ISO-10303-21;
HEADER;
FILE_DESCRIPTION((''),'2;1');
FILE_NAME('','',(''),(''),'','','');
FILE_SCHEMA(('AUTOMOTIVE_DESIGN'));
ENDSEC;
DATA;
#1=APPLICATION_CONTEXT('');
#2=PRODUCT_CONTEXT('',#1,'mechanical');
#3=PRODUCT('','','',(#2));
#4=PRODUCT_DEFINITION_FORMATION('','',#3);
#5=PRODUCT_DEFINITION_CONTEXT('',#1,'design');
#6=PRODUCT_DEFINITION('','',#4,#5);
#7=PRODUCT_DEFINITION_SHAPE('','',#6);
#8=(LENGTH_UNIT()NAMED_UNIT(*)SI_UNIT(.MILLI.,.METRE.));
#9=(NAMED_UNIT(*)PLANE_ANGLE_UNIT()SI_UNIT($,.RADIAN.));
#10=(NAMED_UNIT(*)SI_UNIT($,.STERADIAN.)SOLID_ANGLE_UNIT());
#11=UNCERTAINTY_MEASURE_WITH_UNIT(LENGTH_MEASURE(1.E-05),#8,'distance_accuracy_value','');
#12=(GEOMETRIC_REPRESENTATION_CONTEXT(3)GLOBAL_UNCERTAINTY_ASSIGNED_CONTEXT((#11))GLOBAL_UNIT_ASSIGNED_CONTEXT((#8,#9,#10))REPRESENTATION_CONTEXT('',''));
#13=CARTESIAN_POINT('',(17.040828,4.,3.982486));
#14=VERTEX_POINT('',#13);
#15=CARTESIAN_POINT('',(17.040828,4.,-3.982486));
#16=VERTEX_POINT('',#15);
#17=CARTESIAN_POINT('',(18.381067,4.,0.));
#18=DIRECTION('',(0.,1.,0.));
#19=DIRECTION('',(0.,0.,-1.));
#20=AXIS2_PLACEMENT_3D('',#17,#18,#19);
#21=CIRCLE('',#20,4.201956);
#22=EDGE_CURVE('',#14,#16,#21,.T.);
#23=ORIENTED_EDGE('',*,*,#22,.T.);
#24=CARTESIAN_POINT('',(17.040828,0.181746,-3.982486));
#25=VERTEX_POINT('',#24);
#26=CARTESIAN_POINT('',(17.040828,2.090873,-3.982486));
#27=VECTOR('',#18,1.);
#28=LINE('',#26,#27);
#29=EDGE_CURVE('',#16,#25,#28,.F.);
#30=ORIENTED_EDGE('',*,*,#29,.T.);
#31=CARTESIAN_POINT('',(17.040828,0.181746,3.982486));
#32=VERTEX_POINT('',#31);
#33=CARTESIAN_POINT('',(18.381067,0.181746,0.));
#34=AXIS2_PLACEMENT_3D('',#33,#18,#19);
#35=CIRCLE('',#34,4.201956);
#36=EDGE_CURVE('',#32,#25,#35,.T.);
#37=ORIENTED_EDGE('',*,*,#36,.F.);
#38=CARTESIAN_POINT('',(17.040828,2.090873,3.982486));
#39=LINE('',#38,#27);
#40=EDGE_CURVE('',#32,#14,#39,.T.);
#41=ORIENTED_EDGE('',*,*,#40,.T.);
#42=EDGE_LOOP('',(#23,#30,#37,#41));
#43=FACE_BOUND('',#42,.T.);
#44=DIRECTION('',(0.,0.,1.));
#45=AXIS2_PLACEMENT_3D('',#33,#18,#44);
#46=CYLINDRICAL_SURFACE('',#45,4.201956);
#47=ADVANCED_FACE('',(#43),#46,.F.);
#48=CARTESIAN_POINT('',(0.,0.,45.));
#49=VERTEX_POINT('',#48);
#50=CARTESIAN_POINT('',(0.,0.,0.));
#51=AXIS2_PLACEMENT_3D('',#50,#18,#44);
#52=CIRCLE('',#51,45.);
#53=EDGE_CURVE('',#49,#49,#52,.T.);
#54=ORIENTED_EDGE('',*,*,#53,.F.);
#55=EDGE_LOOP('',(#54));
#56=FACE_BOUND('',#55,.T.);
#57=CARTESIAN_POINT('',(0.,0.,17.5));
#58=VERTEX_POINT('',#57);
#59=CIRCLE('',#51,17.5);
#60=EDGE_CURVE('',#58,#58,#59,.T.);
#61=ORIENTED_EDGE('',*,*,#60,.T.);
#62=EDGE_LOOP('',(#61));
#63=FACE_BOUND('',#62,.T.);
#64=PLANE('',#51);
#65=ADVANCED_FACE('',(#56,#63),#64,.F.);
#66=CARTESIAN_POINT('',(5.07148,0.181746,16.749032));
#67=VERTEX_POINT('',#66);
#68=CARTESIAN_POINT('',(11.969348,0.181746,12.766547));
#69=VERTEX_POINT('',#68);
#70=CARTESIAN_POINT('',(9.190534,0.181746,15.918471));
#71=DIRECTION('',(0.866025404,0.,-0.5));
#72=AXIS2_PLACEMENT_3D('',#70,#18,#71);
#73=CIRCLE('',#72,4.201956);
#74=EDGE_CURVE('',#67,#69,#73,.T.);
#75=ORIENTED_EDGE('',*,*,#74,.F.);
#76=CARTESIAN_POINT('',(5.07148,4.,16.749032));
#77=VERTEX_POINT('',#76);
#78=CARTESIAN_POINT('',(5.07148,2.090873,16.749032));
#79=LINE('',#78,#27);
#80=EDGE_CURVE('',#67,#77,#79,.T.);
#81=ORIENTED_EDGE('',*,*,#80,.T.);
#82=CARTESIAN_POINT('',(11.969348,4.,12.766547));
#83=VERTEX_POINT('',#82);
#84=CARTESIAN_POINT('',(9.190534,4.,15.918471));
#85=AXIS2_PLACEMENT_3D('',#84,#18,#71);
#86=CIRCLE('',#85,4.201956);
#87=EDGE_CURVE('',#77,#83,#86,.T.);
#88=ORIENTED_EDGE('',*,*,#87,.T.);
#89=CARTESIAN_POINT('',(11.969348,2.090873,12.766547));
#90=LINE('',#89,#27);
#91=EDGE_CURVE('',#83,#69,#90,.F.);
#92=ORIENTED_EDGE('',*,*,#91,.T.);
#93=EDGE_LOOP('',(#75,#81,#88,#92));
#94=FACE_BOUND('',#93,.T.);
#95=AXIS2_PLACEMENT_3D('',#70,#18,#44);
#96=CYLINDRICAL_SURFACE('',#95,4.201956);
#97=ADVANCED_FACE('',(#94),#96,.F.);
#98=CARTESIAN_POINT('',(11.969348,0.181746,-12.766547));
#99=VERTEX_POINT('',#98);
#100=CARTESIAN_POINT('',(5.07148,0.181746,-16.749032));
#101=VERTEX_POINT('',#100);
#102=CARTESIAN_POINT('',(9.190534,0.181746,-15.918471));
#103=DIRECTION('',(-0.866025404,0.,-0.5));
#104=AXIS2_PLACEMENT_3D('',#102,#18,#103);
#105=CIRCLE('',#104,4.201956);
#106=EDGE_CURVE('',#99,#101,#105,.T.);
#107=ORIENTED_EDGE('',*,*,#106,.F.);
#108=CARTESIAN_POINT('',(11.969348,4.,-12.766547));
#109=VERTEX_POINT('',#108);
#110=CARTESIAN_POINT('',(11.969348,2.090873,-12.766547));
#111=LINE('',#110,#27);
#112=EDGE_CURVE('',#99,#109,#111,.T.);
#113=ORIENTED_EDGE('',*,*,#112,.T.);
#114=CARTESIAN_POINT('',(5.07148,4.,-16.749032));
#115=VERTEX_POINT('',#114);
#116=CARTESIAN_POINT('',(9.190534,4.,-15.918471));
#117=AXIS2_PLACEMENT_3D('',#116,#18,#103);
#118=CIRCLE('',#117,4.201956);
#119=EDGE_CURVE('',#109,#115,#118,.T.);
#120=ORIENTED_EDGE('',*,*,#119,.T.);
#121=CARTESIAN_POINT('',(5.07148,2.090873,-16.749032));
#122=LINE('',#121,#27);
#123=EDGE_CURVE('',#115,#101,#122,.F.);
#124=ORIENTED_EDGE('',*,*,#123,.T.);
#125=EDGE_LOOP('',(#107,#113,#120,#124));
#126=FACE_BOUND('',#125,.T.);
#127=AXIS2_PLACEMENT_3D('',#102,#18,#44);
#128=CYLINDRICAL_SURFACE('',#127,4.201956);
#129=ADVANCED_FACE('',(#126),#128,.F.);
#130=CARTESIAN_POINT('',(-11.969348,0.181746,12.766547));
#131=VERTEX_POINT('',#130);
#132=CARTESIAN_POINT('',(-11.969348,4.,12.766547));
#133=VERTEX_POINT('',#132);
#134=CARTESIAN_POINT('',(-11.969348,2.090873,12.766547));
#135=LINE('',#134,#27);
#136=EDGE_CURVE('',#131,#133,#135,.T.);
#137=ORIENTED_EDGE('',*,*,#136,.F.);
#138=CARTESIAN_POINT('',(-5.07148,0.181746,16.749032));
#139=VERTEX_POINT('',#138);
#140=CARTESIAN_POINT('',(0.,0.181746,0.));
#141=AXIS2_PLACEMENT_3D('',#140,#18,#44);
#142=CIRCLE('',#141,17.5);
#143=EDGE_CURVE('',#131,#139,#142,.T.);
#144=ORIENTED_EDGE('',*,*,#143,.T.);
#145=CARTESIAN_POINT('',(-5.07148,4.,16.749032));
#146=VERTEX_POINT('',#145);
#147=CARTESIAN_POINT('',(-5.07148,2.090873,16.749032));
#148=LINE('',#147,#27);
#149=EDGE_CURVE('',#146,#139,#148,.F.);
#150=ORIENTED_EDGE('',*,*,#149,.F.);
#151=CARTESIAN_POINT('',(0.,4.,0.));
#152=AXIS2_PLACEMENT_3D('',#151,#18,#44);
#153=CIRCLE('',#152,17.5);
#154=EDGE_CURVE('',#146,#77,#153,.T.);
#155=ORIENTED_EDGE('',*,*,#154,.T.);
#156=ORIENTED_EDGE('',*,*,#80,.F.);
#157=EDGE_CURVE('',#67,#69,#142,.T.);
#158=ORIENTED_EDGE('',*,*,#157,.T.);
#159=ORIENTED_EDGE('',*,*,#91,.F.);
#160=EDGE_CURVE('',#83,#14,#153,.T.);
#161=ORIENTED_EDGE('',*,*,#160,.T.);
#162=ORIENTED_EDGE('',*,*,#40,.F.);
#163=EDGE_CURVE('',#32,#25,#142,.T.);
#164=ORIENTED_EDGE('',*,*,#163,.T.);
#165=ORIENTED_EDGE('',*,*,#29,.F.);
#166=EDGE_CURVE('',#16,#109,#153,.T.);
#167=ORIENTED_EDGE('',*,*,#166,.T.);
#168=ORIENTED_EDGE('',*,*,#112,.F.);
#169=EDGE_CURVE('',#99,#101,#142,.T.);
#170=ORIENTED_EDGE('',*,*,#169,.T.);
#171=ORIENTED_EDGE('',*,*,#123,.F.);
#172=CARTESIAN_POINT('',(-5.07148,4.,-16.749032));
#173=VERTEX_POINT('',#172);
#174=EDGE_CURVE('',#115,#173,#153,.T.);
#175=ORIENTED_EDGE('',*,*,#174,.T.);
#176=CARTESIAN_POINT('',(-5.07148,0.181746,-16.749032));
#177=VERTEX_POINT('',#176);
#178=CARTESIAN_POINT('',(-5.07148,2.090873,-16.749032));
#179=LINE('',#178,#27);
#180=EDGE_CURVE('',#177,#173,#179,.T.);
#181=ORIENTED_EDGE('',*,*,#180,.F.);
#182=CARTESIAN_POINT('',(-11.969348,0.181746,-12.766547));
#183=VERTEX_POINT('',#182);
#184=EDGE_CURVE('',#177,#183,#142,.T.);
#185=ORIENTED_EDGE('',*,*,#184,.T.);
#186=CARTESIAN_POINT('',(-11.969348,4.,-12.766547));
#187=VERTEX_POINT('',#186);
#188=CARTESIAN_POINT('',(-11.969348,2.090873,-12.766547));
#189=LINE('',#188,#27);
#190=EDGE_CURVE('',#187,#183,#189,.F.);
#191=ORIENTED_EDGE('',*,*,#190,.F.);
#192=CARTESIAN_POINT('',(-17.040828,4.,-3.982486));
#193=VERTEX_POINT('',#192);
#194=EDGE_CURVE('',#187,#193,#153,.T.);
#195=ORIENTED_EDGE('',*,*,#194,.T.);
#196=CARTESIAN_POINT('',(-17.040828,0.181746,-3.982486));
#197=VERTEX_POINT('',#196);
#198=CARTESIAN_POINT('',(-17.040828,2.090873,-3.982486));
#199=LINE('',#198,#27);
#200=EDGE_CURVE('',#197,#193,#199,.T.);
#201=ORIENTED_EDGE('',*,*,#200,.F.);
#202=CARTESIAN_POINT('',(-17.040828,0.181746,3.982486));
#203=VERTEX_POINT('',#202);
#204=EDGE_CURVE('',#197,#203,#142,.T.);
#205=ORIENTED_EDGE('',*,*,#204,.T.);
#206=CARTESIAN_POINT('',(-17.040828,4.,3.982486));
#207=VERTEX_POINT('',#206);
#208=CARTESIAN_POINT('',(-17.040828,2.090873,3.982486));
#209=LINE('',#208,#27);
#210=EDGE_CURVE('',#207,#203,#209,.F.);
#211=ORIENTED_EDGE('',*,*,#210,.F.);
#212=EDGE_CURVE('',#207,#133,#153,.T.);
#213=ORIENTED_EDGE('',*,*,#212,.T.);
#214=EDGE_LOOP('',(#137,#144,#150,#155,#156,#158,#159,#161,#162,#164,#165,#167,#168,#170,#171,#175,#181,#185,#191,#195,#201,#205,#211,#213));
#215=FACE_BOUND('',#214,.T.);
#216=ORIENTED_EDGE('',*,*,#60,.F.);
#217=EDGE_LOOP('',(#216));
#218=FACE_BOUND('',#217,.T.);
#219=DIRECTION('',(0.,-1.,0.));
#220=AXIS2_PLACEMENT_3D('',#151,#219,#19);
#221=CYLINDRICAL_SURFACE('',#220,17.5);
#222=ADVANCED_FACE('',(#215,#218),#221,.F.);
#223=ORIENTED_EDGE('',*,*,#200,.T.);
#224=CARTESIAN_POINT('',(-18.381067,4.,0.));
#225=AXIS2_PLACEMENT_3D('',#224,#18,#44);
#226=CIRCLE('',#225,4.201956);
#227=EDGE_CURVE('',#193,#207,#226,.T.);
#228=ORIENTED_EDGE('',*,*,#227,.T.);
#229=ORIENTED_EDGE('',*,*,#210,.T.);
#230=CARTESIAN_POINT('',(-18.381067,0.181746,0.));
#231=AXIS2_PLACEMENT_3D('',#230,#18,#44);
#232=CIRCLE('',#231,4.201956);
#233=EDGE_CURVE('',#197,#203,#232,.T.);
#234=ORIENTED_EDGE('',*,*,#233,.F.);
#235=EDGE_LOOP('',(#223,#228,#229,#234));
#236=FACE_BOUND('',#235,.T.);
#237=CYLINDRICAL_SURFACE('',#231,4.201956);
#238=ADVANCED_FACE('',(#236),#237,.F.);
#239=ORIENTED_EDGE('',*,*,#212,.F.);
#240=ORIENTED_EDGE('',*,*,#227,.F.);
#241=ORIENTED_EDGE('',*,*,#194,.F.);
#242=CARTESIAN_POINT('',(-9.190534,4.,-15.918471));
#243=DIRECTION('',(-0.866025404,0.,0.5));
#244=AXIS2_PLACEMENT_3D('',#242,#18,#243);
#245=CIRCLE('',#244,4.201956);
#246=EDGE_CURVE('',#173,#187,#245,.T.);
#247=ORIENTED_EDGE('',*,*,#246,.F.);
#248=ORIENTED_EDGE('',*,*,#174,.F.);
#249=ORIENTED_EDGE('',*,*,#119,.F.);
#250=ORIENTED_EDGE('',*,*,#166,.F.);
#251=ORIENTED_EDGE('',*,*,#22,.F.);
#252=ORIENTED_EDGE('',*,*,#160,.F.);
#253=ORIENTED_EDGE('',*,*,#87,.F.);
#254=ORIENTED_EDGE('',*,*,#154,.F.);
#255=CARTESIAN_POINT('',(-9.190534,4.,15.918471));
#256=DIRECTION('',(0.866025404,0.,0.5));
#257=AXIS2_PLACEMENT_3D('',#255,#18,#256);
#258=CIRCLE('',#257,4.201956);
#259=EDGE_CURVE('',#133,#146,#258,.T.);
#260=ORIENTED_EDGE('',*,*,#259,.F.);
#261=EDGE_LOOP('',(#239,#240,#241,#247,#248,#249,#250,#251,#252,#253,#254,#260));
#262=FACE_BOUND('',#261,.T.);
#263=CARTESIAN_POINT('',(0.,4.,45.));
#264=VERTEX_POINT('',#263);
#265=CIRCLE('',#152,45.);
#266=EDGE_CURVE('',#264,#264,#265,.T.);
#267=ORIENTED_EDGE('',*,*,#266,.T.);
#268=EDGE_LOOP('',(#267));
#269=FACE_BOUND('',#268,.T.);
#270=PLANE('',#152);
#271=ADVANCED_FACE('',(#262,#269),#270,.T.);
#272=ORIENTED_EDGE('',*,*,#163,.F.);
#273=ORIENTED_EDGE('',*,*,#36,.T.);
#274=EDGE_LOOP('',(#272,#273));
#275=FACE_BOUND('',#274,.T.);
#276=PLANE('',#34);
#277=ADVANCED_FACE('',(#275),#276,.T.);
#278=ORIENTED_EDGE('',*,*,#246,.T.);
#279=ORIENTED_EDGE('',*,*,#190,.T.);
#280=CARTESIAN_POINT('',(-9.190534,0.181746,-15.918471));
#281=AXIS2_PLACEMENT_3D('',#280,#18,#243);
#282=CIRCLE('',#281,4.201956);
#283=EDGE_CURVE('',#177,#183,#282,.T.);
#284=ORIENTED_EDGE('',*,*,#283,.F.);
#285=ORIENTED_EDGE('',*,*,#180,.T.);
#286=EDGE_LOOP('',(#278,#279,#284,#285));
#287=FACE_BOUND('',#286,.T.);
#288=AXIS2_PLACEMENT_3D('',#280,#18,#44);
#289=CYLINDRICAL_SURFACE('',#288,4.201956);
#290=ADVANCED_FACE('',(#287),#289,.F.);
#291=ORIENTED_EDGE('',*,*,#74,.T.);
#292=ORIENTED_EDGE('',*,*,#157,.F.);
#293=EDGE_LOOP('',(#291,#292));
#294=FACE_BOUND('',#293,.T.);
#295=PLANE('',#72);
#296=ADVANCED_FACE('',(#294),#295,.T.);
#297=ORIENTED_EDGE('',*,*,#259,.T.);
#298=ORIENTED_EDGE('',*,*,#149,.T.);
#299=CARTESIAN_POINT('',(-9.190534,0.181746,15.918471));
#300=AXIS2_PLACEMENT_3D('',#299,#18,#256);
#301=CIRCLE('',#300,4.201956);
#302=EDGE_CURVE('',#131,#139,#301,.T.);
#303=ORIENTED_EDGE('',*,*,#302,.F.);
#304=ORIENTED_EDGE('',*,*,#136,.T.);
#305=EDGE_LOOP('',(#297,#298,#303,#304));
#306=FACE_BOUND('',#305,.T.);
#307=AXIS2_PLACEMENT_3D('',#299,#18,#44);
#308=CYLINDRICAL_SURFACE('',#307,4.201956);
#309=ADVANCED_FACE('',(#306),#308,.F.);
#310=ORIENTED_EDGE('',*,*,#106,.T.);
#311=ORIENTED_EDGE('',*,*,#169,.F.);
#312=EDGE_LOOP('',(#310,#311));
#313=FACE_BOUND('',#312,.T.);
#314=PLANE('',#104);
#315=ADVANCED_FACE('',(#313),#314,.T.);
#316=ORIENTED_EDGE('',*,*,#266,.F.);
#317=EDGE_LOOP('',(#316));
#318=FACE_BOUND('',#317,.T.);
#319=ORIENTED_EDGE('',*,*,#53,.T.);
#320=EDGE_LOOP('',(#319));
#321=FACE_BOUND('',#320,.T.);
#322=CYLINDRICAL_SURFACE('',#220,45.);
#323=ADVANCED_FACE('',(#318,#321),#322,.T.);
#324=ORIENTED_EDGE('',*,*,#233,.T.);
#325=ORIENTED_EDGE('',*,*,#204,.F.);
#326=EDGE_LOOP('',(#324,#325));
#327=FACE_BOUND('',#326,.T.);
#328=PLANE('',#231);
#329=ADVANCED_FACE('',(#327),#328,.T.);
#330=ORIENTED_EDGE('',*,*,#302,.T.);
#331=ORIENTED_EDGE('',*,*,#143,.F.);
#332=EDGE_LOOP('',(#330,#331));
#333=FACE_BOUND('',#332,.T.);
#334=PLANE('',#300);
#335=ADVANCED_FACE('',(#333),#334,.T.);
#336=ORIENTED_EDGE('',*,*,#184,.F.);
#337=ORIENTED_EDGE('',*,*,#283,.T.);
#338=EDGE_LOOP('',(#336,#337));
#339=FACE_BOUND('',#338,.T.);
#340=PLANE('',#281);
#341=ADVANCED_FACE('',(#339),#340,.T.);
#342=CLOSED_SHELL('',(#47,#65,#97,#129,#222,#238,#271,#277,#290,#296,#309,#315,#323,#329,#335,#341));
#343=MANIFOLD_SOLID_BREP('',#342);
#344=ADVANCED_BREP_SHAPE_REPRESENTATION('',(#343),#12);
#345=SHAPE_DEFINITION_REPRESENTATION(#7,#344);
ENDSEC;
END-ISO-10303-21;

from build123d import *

# Parameters (mm, degrees)
SKETCH1_R           = 45
BOSS_EXTRUDE1_DEPTH = 4
SKETCH2_R           = 17.5
CUT_EXTRUDE1_DEPTH  = 64.765194268
SKETCH3_R           = 4.201956018
CUT_EXTRUDE2_DEPTH  = 3.818254214
CIRPATTERN1_COUNT   = 6


with BuildPart() as part:
    # Sketch1 → Boss-Extrude1 (new body)
    with BuildSketch(Plane(origin=(0, 0, 0), x_dir=(1, 0, 0), z_dir=(0, 1, 0))):
        Circle(SKETCH1_R)
    extrude(amount=BOSS_EXTRUDE1_DEPTH)

    # Sketch2 → Cut-Extrude1 (cut, through all)
    with BuildSketch(Plane(origin=(0, 0, 0), x_dir=(1, 0, 0), z_dir=(0, 1, 0))):
        Circle(SKETCH2_R)
    extrude(amount=CUT_EXTRUDE1_DEPTH, mode=Mode.SUBTRACT)

    # Sketch3 → Cut-Extrude2 (cut)
    with BuildSketch(Plane(origin=(0, 4, 0), x_dir=(1, 0, 0), z_dir=(0, 1, 0))):
        with Locations((-18.381067401, 0)):
            Circle(SKETCH3_R)
    cut_extrude2 = extrude(amount=-CUT_EXTRUDE2_DEPTH, mode=Mode.SUBTRACT)

    # CirPattern1: Cut-Extrude2 ×6 about axis
    cirpattern1_axis = Axis((0, 0, 0), (0, 1, 0))
    for i in range(1, CIRPATTERN1_COUNT):
        add(cut_extrude2.rotate(cirpattern1_axis, i * 360 / CIRPATTERN1_COUNT), mode=Mode.SUBTRACT)


solid = part.part
